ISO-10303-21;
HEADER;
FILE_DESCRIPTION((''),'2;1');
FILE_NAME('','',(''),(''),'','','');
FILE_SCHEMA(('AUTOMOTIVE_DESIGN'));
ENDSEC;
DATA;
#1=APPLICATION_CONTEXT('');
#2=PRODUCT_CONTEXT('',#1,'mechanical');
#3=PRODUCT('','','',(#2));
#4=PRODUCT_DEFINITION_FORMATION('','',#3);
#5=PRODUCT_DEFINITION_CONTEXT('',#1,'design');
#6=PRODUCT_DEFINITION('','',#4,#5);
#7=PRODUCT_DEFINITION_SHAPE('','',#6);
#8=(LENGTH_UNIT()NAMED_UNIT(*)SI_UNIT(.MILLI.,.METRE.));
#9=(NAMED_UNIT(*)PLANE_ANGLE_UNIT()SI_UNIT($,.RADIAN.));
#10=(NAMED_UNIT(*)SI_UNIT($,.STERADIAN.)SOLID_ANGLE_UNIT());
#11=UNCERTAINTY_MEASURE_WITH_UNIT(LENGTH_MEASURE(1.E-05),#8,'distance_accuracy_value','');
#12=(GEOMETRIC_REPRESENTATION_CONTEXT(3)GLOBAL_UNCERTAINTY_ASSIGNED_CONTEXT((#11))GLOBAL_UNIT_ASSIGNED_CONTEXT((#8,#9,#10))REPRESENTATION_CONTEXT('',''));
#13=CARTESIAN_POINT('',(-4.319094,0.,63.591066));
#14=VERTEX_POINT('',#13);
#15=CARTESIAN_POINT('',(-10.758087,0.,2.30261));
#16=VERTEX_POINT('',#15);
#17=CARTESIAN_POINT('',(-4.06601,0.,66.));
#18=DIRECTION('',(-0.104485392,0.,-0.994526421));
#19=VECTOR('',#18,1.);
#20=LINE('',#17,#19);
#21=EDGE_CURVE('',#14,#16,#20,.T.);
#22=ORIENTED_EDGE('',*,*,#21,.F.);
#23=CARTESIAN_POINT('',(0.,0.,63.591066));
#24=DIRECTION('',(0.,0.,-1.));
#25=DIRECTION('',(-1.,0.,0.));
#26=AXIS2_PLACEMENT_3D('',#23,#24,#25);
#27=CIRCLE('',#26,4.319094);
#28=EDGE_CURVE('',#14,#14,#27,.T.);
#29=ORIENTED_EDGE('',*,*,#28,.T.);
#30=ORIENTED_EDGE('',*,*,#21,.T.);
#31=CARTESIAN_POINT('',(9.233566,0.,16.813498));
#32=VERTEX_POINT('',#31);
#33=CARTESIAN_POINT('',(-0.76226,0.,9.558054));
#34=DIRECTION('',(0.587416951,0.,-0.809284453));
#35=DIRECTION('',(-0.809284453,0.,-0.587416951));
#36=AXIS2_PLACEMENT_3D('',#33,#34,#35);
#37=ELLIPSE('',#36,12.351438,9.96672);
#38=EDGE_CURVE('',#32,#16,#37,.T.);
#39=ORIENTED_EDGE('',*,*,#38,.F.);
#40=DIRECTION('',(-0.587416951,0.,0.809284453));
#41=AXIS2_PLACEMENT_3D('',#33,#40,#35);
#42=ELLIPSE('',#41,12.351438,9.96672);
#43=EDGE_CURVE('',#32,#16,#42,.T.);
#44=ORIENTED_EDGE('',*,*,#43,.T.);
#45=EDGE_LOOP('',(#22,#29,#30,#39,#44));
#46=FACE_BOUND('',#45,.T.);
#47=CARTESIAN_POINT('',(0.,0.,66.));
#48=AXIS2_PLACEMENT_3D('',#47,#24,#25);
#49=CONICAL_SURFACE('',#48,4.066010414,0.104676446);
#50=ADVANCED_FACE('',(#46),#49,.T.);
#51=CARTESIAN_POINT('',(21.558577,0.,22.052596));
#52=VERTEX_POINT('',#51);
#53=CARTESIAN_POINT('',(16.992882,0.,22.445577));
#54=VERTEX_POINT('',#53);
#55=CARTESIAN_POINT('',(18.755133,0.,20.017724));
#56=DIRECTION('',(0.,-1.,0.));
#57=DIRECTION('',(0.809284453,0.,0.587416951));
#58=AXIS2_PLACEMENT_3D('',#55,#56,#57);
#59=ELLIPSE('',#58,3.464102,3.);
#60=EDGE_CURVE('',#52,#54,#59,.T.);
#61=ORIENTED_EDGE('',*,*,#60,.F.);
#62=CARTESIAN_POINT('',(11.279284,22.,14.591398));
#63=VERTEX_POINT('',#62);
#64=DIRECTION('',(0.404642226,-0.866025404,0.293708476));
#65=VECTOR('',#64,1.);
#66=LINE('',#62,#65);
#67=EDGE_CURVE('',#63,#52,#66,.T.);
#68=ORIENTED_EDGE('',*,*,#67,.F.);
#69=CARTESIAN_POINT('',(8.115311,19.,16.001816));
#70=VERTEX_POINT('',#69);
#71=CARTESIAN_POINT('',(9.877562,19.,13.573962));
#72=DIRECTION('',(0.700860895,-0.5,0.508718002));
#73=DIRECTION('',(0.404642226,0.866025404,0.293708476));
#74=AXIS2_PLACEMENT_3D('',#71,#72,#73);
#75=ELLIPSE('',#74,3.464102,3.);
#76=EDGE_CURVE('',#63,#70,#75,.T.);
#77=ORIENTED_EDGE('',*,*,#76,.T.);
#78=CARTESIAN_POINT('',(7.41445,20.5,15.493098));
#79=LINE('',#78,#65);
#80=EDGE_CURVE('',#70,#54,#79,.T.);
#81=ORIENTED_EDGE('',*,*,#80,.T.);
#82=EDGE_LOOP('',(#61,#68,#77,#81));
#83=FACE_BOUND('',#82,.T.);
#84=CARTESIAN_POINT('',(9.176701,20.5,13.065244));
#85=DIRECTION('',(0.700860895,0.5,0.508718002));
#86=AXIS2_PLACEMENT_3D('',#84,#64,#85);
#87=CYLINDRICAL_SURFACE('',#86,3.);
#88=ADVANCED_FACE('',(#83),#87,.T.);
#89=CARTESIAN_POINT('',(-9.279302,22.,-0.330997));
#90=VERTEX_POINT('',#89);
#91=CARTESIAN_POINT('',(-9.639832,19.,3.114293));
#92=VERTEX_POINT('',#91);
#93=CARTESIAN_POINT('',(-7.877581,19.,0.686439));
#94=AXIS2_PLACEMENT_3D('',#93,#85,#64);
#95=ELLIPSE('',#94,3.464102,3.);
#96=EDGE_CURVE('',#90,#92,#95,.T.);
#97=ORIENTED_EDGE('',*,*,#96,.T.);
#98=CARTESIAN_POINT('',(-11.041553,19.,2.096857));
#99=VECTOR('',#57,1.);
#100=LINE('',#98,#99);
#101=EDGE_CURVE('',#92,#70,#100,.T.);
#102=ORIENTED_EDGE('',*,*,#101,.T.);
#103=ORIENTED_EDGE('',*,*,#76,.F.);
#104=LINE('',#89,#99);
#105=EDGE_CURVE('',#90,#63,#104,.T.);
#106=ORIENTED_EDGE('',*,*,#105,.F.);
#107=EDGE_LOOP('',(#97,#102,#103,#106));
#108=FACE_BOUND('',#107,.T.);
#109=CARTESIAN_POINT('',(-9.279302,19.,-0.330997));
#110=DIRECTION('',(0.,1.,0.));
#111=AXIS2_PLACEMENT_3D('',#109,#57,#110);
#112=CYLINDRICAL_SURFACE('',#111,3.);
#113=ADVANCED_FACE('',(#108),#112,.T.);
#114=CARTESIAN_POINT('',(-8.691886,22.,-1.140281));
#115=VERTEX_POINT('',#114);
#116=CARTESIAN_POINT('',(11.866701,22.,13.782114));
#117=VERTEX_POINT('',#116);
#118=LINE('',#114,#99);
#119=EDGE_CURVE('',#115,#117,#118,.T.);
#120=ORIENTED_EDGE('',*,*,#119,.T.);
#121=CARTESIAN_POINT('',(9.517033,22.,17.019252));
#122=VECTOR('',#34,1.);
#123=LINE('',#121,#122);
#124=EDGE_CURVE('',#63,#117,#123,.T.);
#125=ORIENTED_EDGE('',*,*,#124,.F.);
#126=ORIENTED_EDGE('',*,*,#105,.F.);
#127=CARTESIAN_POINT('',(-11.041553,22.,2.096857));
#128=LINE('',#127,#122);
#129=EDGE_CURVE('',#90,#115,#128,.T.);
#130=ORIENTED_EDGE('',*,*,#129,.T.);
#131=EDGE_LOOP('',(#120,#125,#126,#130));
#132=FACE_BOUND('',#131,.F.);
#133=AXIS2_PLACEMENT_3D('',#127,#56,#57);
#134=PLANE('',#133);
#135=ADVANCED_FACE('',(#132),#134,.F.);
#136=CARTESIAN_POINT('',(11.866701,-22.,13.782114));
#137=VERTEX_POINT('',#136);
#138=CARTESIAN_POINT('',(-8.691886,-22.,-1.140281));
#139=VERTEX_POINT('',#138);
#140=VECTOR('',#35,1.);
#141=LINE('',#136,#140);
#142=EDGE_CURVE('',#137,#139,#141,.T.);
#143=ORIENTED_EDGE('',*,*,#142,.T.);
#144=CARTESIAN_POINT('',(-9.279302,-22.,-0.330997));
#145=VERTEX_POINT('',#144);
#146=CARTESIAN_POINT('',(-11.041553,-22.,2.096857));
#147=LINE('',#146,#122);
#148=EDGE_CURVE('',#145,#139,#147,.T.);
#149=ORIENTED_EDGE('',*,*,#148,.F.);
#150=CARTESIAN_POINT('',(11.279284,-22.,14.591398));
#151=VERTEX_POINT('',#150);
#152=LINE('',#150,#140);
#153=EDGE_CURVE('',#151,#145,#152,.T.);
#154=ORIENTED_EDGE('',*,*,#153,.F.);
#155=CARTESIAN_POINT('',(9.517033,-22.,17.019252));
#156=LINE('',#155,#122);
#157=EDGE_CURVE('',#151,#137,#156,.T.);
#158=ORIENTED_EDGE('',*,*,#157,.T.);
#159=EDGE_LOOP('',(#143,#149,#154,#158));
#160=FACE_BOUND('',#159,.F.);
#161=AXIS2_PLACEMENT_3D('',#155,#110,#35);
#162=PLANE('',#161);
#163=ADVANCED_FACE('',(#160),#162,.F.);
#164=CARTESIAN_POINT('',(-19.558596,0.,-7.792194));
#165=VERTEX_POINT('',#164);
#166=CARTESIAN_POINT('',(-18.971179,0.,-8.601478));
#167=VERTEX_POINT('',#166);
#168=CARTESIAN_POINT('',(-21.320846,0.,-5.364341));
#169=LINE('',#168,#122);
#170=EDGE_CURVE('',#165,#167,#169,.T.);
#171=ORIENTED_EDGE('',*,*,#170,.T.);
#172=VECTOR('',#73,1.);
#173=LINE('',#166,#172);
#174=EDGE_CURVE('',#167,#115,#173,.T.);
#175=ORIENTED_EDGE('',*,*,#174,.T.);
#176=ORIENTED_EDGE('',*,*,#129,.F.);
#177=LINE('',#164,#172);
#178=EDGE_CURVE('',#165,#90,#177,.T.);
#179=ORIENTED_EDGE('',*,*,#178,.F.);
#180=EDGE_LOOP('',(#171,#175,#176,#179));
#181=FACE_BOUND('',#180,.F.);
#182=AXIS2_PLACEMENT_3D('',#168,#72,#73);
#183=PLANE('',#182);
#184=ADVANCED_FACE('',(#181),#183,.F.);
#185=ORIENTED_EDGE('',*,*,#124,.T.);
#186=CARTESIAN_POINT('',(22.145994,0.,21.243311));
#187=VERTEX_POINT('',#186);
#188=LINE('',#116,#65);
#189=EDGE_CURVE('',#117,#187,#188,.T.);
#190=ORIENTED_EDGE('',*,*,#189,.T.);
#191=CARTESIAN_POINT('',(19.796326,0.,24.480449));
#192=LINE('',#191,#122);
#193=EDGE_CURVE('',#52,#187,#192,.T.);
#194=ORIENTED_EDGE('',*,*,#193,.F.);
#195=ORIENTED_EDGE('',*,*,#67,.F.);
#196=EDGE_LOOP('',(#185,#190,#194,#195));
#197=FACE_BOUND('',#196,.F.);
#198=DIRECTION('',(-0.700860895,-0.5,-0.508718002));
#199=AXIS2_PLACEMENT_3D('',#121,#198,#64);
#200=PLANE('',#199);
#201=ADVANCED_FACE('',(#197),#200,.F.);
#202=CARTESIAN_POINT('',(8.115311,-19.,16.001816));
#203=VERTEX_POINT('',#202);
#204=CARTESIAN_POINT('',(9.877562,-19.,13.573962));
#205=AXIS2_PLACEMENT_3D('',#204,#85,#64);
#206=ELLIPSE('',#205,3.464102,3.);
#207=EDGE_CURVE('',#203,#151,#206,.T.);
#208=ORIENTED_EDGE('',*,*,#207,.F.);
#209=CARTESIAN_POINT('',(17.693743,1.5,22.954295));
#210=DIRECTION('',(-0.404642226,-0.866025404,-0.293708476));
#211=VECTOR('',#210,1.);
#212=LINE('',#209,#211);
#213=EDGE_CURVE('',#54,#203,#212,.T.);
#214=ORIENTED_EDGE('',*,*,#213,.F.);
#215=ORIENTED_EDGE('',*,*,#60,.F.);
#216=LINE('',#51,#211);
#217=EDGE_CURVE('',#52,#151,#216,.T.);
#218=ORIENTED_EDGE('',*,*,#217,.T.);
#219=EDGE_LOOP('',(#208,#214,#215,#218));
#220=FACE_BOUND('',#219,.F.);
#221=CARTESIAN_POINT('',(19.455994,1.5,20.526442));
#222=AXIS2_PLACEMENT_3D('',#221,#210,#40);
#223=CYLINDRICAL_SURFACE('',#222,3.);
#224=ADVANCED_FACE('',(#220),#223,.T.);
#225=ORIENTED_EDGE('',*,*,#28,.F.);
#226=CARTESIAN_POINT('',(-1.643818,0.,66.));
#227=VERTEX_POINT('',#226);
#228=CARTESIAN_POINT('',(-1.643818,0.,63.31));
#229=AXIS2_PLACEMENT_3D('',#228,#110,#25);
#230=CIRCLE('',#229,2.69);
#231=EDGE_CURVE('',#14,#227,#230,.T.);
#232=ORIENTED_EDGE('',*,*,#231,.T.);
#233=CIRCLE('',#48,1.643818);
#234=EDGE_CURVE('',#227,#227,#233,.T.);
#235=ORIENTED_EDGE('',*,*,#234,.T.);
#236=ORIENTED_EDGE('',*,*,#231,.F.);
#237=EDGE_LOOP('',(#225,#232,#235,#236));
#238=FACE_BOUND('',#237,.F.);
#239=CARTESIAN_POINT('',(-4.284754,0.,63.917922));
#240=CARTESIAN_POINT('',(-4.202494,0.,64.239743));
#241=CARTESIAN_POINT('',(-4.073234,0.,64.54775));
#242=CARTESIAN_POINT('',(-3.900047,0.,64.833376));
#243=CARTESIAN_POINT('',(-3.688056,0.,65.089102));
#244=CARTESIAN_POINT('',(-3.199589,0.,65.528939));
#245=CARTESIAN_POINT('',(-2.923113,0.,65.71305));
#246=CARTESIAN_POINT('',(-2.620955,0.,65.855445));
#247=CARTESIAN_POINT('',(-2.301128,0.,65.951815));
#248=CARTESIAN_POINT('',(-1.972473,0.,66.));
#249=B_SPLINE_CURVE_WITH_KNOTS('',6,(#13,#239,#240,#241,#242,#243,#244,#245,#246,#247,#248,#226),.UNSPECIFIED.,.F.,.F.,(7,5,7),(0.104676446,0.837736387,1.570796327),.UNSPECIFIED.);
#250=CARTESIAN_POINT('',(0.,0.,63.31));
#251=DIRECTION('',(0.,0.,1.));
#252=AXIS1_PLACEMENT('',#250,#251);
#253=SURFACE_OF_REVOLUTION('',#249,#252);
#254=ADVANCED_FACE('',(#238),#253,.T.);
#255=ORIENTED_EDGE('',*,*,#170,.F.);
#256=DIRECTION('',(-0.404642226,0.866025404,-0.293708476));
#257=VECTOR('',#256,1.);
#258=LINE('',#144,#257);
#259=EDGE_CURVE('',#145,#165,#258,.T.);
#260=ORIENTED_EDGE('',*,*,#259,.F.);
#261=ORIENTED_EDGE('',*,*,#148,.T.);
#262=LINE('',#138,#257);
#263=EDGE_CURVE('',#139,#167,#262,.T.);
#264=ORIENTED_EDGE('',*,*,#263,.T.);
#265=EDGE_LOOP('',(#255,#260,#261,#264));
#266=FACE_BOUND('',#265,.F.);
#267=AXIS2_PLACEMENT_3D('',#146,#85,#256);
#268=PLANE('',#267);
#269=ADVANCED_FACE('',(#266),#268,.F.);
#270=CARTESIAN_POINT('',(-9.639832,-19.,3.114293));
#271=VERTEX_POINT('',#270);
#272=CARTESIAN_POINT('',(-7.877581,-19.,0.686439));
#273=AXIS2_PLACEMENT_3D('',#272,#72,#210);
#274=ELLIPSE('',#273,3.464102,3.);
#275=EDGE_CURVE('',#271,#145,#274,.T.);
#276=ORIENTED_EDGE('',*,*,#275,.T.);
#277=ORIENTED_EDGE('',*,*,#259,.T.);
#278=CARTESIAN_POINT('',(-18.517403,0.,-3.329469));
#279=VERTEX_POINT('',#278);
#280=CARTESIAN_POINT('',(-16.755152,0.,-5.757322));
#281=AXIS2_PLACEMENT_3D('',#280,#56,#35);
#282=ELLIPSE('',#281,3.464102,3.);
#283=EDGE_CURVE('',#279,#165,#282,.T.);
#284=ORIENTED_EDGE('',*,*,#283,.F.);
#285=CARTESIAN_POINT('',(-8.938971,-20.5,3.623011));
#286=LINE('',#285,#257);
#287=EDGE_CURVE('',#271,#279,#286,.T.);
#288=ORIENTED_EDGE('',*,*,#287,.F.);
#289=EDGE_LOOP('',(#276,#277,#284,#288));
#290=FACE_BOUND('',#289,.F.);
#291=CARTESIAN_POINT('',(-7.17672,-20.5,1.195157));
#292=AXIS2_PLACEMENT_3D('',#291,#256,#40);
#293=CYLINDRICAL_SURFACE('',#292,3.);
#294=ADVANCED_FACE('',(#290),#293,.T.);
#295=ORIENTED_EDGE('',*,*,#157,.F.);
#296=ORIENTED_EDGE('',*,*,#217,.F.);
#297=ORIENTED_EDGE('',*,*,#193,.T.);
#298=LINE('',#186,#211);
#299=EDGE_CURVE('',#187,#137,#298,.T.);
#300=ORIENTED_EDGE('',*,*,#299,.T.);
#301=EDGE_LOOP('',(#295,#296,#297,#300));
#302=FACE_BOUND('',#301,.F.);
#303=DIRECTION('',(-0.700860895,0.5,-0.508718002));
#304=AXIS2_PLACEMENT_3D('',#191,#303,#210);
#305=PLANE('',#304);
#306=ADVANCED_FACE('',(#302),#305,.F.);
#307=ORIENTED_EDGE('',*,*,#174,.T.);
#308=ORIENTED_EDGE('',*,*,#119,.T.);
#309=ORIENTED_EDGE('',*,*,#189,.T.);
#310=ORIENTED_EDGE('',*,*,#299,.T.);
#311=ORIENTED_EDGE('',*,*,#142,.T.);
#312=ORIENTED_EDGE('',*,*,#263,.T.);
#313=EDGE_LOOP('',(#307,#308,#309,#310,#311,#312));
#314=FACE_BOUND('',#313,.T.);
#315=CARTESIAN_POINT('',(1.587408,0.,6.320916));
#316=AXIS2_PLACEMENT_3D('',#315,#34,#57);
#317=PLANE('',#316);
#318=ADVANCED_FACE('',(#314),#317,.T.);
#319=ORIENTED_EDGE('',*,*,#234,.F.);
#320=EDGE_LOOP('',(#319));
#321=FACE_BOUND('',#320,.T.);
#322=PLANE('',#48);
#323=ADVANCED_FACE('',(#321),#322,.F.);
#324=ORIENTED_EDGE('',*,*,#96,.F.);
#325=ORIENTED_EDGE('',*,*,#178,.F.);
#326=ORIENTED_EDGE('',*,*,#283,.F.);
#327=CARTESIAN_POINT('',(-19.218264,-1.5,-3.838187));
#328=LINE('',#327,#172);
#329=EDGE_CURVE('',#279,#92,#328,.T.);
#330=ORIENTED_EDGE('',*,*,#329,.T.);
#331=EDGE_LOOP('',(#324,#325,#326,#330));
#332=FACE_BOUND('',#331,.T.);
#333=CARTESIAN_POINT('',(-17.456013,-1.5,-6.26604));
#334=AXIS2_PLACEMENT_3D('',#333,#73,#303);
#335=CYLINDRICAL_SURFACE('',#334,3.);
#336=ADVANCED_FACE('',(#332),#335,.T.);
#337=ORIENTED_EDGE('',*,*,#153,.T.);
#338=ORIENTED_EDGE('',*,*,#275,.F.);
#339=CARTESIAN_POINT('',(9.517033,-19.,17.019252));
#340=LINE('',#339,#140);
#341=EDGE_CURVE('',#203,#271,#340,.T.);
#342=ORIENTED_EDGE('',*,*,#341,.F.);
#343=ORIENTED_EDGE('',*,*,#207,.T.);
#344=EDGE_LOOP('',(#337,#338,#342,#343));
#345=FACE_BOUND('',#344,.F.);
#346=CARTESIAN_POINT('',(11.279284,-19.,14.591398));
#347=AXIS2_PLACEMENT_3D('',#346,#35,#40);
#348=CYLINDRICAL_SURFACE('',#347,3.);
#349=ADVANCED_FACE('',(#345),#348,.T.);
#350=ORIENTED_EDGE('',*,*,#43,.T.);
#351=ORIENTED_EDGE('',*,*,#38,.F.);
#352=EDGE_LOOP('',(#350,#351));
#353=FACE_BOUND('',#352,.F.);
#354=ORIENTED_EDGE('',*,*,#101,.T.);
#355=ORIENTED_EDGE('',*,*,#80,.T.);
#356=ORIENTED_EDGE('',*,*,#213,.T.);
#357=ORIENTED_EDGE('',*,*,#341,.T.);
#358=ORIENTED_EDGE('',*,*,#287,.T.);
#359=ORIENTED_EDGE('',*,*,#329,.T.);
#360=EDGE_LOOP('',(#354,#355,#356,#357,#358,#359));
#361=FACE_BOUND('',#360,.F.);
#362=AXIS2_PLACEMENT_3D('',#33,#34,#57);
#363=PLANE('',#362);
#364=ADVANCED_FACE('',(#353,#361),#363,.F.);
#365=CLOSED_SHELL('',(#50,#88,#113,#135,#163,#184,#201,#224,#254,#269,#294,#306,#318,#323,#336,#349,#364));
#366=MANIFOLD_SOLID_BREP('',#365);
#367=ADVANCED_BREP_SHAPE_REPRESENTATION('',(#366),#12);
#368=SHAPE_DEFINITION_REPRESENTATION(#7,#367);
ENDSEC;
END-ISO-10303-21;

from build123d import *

# Parameters (mm, degrees)
F3_DEPTH      = 11.001
F3_DEPTH_BACK = 11.001
F5_DEPTH      = 4
F6_R          = 3
F7_R          = 2.69


with BuildPart() as f1:
    # F0 (on Front) → F1 (revolve)
    with BuildSketch(Plane.XZ):
        Polygon((-4.066010414, 66), (-11, 0), (0, 0), (0, 66), align=None)
    revolve(axis=Axis((0, 0, 33), (0, 0, -1)))

    # F2 (on Front) → F3 (cut, two sides)
    with BuildSketch(Plane.XZ) as f3_sk:
        Polygon((40.7802015543, 39.7115387022), (-13.9303933829, 0), (40.7802015543, 0), align=None)
    extrude(amount=-F3_DEPTH, mode=Mode.SUBTRACT)
    extrude(f3_sk.sketch, amount=F3_DEPTH_BACK, mode=Mode.SUBTRACT)

    # F4 (on face) → F5 (join)
    with BuildSketch(Plane(origin=(-4.8068030747, 0, 6.6223335725), x_dir=(0.8092844528, 0, 0.5874169511), z_dir=(0.5874169511, 0, -0.8092844528))):
        Polygon((-7.7040281941, -22), (17.6993836503, -22), (30.4010895725, 0), (17.6993836503, 22), (-7.7040281941, 22), (-20.4057341162, 0), align=None)
    extrude(amount=F5_DEPTH)

    # F6
    f6_edges = [f1.edges().sort_by_distance(p)[0] for p in [
        (-0.76226, 22, 9.558054),
        (14.65668, 11, 20.74985),
        (14.65668, -11, 20.74985),
        (-0.76226, -22, 9.558054),
        (-16.1812, -11, -1.633742),
        (-16.1812, 11, -1.633742),
    ]]
    fillet(f6_edges, radius=F6_R)

    # F7
    f7_edges = [f1.edges().sort_by_distance(p)[0] for p in [
        (4.06601, 0, 66),
    ]]
    fillet(f7_edges, radius=F7_R)


solid = f1.part
